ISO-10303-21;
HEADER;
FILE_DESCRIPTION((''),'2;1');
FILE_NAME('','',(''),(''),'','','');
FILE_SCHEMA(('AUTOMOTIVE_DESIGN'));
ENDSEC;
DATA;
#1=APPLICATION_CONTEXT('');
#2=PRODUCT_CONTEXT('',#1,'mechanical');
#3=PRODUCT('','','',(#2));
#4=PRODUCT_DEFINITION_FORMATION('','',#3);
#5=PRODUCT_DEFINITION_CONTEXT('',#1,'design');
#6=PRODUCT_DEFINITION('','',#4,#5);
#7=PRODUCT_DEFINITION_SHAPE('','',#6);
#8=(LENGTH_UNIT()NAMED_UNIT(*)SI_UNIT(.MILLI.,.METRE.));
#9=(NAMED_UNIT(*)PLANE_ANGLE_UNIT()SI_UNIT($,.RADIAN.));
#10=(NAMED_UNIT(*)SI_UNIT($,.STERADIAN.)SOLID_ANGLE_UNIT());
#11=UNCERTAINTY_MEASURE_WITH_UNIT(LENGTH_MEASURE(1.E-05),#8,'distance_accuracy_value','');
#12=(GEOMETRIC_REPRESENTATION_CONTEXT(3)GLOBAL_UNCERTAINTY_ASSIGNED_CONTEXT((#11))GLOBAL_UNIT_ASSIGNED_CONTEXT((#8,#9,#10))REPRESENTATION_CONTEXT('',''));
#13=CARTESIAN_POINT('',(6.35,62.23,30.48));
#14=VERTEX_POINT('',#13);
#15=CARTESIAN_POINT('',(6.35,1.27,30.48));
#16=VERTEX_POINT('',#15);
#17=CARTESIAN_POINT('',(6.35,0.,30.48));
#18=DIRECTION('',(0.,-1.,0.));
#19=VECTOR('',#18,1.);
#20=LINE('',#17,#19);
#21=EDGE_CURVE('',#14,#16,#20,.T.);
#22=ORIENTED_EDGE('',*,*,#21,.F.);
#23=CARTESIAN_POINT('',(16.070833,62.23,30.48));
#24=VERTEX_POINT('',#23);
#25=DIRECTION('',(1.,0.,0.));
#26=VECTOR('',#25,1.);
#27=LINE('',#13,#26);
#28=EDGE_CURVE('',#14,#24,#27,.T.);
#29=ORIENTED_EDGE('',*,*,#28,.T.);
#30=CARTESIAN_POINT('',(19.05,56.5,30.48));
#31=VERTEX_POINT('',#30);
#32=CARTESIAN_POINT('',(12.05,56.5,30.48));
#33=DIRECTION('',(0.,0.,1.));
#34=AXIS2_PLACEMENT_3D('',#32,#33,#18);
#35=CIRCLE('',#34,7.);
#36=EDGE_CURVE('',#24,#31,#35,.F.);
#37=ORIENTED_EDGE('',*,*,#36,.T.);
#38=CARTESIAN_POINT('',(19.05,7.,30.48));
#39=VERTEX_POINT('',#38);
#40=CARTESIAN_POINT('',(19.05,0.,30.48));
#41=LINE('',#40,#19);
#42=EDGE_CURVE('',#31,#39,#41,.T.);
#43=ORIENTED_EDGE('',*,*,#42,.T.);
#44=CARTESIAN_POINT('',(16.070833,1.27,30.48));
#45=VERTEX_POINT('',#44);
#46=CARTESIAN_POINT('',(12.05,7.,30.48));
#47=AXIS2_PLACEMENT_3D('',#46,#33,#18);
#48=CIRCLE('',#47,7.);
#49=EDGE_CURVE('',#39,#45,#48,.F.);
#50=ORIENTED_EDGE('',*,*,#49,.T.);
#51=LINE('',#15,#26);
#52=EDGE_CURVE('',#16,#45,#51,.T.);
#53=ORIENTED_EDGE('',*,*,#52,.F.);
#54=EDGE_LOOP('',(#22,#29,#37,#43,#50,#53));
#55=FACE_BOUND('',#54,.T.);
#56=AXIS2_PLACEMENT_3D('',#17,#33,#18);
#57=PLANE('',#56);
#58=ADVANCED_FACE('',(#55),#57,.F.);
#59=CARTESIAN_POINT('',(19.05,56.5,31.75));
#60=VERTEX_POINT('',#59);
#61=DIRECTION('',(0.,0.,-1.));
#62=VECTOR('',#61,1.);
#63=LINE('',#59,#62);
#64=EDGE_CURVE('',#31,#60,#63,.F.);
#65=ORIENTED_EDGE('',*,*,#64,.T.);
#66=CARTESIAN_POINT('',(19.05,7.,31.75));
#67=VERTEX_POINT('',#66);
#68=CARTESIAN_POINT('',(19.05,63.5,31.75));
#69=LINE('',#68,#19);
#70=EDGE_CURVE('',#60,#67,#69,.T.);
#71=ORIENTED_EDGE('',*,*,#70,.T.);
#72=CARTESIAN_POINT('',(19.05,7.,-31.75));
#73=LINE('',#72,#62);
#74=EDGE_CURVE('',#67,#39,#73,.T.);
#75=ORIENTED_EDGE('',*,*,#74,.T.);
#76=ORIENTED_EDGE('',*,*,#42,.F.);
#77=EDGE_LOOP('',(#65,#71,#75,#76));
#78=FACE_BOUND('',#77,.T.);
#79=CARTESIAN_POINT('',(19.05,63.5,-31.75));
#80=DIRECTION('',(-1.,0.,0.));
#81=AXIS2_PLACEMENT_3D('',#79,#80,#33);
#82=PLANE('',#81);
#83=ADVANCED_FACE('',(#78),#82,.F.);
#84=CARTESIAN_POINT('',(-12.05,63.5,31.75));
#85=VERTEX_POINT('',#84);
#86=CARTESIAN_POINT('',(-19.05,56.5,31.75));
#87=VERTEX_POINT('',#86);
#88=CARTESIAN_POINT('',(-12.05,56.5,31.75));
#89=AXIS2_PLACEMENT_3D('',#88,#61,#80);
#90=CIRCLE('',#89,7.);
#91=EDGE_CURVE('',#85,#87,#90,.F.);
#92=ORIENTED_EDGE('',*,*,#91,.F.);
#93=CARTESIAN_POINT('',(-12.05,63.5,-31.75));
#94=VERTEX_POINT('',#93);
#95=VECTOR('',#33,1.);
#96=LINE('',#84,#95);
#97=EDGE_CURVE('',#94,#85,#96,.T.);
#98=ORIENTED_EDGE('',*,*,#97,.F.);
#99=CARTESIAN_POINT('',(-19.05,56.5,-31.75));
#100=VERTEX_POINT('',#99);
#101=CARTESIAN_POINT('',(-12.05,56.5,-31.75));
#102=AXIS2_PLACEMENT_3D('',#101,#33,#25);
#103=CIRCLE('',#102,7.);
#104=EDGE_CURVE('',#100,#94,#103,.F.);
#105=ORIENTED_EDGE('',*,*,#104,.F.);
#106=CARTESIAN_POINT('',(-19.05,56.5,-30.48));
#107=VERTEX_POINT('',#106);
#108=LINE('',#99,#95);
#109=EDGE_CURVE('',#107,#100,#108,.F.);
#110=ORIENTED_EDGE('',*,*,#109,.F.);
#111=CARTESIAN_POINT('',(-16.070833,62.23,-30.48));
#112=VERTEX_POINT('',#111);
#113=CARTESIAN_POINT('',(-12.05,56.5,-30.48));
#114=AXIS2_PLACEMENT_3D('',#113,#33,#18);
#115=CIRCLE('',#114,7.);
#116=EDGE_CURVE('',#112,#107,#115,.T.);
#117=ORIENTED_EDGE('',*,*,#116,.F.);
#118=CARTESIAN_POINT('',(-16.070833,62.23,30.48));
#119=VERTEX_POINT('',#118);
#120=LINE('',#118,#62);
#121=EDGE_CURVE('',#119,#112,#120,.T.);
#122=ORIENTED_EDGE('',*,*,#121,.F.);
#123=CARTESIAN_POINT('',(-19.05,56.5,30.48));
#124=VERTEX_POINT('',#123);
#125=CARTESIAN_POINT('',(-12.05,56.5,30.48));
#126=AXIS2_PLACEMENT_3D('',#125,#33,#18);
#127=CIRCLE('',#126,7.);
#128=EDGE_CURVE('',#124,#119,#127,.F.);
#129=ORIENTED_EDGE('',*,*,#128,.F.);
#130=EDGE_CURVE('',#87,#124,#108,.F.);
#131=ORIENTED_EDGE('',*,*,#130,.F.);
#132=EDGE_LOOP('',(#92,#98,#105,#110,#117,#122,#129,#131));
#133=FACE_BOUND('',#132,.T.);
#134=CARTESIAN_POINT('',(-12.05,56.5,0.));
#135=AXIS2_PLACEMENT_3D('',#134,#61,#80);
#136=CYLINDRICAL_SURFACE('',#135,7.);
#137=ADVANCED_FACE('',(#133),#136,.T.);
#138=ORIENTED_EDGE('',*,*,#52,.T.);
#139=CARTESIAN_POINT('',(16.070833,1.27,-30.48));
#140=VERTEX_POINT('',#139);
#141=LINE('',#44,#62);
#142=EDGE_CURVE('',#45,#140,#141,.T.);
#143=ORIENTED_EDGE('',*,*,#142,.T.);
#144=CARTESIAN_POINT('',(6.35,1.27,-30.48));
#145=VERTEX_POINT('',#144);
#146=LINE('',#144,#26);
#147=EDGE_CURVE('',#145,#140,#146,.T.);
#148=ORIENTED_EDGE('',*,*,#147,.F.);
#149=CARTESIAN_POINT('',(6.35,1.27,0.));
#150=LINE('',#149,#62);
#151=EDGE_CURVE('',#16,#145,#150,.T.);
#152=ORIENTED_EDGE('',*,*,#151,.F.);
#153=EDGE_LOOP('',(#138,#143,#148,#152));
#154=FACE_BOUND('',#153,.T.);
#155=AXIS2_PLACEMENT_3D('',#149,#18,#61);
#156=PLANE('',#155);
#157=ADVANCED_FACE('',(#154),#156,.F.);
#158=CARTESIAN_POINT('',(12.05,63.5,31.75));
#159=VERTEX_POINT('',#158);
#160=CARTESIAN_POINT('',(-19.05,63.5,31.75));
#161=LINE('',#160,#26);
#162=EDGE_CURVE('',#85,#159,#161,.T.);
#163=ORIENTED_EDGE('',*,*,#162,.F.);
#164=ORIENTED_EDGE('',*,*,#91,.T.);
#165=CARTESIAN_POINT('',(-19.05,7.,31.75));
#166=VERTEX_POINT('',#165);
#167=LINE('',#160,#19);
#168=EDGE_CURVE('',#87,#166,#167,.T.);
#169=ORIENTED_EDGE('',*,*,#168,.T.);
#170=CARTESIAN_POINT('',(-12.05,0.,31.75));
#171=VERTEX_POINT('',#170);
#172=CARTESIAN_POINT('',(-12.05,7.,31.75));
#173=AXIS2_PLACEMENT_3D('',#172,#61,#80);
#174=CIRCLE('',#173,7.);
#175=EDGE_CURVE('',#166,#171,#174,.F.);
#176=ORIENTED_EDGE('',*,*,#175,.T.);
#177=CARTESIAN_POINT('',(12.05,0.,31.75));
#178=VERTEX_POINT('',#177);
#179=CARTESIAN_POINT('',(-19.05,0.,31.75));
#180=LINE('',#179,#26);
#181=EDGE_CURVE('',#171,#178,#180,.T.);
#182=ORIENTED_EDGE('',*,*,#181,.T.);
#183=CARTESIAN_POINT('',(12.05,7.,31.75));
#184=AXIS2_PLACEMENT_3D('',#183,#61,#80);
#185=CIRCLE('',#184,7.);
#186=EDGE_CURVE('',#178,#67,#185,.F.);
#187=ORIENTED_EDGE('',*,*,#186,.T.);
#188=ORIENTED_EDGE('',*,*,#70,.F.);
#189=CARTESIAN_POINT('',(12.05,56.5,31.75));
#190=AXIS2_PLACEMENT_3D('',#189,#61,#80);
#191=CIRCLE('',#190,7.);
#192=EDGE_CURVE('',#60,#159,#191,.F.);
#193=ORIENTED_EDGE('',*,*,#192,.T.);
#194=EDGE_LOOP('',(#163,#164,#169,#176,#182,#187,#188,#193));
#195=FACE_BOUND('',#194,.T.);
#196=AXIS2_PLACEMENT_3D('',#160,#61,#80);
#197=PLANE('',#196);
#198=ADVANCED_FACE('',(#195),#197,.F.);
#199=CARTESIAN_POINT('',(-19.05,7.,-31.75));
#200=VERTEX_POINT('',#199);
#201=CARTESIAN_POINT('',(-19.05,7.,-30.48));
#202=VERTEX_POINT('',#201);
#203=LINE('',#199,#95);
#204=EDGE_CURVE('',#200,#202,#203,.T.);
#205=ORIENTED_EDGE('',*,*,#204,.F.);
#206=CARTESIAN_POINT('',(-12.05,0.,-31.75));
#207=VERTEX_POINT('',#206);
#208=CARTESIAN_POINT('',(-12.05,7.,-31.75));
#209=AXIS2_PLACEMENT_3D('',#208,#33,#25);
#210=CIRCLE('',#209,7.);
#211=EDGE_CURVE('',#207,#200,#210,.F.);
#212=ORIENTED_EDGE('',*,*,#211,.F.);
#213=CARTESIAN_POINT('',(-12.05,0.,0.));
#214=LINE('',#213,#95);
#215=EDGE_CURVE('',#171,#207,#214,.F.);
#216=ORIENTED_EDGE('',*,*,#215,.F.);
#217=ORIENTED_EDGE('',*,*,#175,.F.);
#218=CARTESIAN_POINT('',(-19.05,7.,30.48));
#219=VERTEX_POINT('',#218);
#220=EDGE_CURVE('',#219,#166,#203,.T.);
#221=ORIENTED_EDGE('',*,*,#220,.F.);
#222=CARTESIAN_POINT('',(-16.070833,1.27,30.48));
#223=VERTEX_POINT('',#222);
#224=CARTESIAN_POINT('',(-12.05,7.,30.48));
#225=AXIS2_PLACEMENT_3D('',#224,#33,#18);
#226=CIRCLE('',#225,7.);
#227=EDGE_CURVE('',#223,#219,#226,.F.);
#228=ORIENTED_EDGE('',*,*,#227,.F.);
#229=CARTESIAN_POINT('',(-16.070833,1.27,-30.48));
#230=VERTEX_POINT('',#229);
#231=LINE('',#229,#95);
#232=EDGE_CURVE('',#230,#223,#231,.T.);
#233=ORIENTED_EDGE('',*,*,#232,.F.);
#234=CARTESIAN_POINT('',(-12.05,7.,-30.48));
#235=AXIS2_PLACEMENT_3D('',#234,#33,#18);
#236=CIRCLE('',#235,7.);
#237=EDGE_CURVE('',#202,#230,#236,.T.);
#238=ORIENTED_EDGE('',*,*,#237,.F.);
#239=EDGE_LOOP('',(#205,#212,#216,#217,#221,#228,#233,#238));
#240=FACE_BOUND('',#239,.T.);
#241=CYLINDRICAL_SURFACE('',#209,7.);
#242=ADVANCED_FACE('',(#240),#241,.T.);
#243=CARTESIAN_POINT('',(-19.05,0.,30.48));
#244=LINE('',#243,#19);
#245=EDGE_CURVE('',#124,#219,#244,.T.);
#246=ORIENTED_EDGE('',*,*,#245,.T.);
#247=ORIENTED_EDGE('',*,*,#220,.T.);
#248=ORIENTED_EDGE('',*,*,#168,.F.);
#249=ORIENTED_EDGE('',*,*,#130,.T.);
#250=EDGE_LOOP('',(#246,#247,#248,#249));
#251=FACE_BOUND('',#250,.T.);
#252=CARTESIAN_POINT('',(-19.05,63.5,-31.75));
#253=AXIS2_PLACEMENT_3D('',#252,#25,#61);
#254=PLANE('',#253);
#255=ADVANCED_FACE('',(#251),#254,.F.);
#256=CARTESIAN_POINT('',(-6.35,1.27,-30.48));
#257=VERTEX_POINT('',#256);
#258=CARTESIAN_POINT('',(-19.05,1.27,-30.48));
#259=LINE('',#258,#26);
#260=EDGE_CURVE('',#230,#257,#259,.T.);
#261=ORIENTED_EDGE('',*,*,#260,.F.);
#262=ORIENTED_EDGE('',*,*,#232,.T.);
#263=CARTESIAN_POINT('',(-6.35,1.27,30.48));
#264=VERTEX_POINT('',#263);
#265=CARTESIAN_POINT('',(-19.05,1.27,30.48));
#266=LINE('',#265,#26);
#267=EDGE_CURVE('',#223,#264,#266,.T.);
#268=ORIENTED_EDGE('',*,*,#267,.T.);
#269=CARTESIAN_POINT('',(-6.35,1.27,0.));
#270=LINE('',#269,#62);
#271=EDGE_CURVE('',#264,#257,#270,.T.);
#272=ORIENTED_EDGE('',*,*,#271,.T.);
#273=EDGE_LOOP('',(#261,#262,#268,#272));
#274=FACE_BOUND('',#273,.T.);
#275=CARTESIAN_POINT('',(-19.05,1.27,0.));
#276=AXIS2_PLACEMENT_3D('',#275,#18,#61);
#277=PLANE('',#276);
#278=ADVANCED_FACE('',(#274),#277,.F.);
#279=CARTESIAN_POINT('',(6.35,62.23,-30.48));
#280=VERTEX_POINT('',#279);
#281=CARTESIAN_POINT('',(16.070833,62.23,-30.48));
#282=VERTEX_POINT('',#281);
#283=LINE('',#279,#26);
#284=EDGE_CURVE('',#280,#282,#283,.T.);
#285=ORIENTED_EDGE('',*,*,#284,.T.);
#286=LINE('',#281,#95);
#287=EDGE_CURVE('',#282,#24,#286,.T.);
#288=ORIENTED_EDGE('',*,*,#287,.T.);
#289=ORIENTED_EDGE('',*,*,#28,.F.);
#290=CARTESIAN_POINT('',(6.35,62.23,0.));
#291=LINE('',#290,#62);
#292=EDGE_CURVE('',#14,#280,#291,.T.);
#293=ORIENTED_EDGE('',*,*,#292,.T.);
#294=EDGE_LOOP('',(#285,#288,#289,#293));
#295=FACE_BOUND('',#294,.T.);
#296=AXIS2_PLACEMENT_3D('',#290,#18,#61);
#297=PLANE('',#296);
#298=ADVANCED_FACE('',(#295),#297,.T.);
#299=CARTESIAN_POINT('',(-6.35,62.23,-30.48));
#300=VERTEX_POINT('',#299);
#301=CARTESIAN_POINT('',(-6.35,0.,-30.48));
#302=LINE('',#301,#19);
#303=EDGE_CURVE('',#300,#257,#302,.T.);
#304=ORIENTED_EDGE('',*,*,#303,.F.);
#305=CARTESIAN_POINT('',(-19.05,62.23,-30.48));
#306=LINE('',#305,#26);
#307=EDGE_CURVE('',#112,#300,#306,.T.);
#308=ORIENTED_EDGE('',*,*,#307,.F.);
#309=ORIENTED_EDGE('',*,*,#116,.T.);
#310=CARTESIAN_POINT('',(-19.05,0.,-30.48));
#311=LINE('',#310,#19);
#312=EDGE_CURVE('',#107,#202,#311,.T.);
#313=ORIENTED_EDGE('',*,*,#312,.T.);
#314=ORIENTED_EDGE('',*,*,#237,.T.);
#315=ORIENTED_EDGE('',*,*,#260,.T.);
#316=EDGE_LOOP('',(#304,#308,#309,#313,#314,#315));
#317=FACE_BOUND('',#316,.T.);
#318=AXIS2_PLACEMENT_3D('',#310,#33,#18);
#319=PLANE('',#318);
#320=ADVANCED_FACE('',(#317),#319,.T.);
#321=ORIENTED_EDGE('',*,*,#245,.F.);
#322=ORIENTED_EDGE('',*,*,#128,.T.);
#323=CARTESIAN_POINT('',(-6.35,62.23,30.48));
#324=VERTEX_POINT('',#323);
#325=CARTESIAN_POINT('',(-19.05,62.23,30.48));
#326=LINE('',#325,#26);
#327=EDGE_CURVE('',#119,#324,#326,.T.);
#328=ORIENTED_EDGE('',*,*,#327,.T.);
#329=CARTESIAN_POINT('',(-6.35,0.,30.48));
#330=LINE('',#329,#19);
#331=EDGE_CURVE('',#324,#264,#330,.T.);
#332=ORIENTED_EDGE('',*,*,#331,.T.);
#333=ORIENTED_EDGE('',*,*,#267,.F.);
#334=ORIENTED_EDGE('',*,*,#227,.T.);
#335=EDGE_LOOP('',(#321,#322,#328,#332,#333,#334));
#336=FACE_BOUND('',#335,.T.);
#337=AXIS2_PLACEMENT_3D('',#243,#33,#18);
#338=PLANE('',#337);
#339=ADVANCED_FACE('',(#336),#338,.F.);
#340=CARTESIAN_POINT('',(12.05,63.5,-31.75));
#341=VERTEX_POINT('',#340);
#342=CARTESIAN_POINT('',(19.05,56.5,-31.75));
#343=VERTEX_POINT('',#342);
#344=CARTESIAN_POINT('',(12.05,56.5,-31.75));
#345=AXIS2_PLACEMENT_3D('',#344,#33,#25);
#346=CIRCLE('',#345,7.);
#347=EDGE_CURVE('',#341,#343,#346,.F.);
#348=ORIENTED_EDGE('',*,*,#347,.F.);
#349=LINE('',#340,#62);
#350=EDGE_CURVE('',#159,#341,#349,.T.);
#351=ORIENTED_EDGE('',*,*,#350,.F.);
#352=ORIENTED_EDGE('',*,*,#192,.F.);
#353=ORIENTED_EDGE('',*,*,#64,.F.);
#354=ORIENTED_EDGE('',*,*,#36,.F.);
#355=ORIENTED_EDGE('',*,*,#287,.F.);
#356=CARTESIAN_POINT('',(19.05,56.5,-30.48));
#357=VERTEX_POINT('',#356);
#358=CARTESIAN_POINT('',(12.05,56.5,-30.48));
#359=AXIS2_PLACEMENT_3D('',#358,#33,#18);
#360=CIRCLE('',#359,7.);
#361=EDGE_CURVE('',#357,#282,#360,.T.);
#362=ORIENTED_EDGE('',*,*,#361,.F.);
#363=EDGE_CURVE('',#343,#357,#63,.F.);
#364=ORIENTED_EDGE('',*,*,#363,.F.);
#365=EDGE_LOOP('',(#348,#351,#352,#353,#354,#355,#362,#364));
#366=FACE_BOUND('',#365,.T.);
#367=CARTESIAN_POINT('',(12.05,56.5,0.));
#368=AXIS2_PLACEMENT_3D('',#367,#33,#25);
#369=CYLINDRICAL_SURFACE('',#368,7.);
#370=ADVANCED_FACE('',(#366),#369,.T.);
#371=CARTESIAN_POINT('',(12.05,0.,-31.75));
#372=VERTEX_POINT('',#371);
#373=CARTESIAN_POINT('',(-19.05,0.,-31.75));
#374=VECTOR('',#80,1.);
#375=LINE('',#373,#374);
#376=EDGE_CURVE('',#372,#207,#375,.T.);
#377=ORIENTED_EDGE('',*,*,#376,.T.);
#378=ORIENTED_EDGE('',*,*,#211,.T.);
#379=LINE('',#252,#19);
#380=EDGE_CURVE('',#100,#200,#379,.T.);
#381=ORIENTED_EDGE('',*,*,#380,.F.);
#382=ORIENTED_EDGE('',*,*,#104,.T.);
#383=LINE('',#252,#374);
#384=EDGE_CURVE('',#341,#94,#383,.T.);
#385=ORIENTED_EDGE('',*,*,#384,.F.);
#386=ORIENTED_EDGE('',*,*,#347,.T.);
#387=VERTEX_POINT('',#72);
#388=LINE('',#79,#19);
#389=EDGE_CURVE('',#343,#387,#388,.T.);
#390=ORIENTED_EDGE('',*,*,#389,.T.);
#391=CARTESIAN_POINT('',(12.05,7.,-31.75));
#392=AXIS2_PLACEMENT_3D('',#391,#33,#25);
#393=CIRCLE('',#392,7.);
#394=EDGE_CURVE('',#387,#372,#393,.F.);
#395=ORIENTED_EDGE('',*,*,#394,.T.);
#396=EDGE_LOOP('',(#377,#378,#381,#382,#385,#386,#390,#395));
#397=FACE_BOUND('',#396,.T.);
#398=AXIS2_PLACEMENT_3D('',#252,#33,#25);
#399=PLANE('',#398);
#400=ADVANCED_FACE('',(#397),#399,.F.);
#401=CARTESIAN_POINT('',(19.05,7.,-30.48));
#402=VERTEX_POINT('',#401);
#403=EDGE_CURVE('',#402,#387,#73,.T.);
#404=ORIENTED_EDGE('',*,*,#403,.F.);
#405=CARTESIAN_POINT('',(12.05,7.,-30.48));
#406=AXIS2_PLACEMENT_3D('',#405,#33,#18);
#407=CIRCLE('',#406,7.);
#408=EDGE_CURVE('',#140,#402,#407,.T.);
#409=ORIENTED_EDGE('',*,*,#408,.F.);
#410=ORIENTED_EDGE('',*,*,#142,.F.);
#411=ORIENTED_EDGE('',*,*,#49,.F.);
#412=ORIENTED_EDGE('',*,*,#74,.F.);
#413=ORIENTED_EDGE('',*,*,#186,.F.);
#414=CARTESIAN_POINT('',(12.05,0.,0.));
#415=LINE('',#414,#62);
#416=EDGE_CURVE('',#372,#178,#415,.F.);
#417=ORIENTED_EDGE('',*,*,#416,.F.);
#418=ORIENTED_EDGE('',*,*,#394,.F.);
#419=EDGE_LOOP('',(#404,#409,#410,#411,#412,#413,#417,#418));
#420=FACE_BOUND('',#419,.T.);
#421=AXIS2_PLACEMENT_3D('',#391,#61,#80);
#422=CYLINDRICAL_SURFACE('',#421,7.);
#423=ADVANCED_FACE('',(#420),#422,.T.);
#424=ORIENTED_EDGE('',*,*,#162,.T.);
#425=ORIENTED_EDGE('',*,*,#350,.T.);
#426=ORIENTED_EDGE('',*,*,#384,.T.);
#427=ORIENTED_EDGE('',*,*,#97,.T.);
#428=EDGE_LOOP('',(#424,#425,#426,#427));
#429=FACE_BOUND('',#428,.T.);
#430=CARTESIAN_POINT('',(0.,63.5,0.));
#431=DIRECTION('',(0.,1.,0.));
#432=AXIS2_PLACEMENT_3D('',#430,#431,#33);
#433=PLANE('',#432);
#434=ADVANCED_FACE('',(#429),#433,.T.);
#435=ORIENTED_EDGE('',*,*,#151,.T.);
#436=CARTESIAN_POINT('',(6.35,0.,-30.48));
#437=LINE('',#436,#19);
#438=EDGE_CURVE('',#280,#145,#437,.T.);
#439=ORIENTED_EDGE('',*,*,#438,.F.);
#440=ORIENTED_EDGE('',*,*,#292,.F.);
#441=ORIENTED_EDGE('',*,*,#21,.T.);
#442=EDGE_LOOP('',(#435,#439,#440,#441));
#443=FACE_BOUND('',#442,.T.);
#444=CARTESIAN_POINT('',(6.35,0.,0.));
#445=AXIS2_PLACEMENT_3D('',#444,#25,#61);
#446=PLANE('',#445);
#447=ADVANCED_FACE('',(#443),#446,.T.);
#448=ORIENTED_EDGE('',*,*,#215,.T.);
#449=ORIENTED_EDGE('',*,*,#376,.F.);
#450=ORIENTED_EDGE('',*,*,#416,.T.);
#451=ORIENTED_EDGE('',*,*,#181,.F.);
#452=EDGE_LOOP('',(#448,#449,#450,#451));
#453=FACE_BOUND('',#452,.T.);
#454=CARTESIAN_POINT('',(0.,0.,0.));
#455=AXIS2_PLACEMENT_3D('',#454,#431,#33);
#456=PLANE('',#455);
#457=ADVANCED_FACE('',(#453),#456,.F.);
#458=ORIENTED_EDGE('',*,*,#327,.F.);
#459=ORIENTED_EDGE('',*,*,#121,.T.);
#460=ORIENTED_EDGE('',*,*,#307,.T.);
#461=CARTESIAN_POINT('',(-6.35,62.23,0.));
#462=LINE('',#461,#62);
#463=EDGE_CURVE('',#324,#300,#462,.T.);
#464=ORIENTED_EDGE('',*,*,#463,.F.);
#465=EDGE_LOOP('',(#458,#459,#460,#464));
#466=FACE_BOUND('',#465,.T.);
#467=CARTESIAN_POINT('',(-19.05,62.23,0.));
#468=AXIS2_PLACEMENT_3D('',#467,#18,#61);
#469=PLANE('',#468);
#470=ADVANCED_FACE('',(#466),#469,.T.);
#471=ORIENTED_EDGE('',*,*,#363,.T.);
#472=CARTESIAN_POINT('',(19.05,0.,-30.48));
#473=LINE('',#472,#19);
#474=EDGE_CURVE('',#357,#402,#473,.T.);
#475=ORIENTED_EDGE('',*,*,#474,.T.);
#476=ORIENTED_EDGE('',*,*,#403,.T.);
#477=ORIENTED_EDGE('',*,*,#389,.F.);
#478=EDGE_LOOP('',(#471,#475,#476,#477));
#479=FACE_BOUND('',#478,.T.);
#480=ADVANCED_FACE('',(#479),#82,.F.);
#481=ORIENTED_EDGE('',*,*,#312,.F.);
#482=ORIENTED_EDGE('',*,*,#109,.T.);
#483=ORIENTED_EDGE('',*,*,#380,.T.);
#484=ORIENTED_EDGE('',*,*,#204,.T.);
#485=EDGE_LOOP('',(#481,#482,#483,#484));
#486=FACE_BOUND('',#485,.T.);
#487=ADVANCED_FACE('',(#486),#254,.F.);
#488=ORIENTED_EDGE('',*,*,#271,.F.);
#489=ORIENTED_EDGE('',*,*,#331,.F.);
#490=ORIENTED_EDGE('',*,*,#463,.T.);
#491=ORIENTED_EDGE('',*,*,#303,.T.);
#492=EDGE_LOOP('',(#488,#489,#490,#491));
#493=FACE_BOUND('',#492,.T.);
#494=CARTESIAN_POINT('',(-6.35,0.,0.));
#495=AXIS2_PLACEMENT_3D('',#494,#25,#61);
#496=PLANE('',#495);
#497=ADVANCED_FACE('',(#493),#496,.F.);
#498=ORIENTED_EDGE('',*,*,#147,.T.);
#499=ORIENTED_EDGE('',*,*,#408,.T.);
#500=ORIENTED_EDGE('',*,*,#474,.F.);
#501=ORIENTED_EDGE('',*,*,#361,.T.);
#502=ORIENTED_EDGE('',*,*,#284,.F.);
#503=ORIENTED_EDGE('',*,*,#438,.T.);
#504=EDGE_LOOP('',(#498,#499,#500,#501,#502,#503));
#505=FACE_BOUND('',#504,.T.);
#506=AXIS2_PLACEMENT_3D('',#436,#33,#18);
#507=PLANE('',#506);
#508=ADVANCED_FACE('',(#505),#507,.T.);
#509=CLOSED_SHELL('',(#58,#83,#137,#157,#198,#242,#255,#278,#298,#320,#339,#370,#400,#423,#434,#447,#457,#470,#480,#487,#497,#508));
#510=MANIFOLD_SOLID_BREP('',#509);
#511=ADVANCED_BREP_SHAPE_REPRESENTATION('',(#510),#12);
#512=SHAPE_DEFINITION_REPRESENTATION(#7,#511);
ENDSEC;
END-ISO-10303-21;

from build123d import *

# Parameters (mm, degrees)
SKETCH1_W           = 38.1
SKETCH1_H           = 63.5
BOSS_EXTRUDE1_DEPTH = 63.5
SKETCH2_W           = 60.96
SKETCH2_H           = 60.96
CUT_EXTRUDE1_DEPTH  = 12.7
LPATTERN1_COUNT     = 2
LPATTERN1_PITCH     = 25.4
FILLET1_R           = 7
FILLET2_R           = 7


with BuildPart() as part:
    # Sketch1 → Boss-Extrude1 (new body)
    with BuildSketch(Plane(origin=(0, 0, 0), x_dir=(1, 0, 0), z_dir=(0, 1, 0))):
        Rectangle(SKETCH1_W, SKETCH1_H)
    extrude(amount=BOSS_EXTRUDE1_DEPTH)

    # Sketch2 → Cut-Extrude1 (cut)
    with BuildSketch(Plane(origin=(19.05, 0, 0), x_dir=(0, 0, -1), z_dir=(1, 0, 0))):
        with Locations((0, 31.75)):
            Rectangle(SKETCH2_W, SKETCH2_H)
    cut_extrude1 = extrude(amount=-CUT_EXTRUDE1_DEPTH, mode=Mode.SUBTRACT)

    # LPattern1: Cut-Extrude1 ×2
    with Locations(*[(-i * LPATTERN1_PITCH, 0, 0) for i in range(1, LPATTERN1_COUNT)]):
        add(cut_extrude1, mode=Mode.SUBTRACT)

    # Fillet1
    # the kernel refuses this fillet: 7 mm, written as the material it takes off along each edge
    with BuildSketch(Plane(origin=(19.05, 63.5, -49.25), x_dir=(0, -1, 0), z_dir=(0, 0, 1)), Plane(origin=(-19.05, 63.5, 49.25), x_dir=(0, -1, 0), z_dir=(0, 0, -1))) as fillet1_piece_1:
        with BuildLine():
            CenterArc((FILLET1_R, -FILLET1_R), FILLET1_R, 90, 90)
            Line((0, -FILLET1_R), (0, 0))
            Line((0, 0), (FILLET1_R, 0))
        make_face()
    extrude(amount=98.5, mode=Mode.SUBTRACT)

    # Fillet2
    # the kernel refuses this fillet: 7 mm, written as the material it takes off along each edge
    with BuildSketch(Plane(origin=(-19.05, 0, 49.25), x_dir=(1, 0, 0), z_dir=(0, 0, -1)), Plane(origin=(19.05, 0, -49.25), x_dir=(-1, 0, 0), z_dir=(0, 0, 1))) as fillet2_piece_1:
        with BuildLine():
            CenterArc((FILLET2_R, -FILLET2_R), FILLET2_R, 90, 90)
            Line((0, -FILLET2_R), (0, 0))
            Line((0, 0), (FILLET2_R, 0))
        make_face()
    extrude(amount=98.5, mode=Mode.SUBTRACT)


solid = part.part
